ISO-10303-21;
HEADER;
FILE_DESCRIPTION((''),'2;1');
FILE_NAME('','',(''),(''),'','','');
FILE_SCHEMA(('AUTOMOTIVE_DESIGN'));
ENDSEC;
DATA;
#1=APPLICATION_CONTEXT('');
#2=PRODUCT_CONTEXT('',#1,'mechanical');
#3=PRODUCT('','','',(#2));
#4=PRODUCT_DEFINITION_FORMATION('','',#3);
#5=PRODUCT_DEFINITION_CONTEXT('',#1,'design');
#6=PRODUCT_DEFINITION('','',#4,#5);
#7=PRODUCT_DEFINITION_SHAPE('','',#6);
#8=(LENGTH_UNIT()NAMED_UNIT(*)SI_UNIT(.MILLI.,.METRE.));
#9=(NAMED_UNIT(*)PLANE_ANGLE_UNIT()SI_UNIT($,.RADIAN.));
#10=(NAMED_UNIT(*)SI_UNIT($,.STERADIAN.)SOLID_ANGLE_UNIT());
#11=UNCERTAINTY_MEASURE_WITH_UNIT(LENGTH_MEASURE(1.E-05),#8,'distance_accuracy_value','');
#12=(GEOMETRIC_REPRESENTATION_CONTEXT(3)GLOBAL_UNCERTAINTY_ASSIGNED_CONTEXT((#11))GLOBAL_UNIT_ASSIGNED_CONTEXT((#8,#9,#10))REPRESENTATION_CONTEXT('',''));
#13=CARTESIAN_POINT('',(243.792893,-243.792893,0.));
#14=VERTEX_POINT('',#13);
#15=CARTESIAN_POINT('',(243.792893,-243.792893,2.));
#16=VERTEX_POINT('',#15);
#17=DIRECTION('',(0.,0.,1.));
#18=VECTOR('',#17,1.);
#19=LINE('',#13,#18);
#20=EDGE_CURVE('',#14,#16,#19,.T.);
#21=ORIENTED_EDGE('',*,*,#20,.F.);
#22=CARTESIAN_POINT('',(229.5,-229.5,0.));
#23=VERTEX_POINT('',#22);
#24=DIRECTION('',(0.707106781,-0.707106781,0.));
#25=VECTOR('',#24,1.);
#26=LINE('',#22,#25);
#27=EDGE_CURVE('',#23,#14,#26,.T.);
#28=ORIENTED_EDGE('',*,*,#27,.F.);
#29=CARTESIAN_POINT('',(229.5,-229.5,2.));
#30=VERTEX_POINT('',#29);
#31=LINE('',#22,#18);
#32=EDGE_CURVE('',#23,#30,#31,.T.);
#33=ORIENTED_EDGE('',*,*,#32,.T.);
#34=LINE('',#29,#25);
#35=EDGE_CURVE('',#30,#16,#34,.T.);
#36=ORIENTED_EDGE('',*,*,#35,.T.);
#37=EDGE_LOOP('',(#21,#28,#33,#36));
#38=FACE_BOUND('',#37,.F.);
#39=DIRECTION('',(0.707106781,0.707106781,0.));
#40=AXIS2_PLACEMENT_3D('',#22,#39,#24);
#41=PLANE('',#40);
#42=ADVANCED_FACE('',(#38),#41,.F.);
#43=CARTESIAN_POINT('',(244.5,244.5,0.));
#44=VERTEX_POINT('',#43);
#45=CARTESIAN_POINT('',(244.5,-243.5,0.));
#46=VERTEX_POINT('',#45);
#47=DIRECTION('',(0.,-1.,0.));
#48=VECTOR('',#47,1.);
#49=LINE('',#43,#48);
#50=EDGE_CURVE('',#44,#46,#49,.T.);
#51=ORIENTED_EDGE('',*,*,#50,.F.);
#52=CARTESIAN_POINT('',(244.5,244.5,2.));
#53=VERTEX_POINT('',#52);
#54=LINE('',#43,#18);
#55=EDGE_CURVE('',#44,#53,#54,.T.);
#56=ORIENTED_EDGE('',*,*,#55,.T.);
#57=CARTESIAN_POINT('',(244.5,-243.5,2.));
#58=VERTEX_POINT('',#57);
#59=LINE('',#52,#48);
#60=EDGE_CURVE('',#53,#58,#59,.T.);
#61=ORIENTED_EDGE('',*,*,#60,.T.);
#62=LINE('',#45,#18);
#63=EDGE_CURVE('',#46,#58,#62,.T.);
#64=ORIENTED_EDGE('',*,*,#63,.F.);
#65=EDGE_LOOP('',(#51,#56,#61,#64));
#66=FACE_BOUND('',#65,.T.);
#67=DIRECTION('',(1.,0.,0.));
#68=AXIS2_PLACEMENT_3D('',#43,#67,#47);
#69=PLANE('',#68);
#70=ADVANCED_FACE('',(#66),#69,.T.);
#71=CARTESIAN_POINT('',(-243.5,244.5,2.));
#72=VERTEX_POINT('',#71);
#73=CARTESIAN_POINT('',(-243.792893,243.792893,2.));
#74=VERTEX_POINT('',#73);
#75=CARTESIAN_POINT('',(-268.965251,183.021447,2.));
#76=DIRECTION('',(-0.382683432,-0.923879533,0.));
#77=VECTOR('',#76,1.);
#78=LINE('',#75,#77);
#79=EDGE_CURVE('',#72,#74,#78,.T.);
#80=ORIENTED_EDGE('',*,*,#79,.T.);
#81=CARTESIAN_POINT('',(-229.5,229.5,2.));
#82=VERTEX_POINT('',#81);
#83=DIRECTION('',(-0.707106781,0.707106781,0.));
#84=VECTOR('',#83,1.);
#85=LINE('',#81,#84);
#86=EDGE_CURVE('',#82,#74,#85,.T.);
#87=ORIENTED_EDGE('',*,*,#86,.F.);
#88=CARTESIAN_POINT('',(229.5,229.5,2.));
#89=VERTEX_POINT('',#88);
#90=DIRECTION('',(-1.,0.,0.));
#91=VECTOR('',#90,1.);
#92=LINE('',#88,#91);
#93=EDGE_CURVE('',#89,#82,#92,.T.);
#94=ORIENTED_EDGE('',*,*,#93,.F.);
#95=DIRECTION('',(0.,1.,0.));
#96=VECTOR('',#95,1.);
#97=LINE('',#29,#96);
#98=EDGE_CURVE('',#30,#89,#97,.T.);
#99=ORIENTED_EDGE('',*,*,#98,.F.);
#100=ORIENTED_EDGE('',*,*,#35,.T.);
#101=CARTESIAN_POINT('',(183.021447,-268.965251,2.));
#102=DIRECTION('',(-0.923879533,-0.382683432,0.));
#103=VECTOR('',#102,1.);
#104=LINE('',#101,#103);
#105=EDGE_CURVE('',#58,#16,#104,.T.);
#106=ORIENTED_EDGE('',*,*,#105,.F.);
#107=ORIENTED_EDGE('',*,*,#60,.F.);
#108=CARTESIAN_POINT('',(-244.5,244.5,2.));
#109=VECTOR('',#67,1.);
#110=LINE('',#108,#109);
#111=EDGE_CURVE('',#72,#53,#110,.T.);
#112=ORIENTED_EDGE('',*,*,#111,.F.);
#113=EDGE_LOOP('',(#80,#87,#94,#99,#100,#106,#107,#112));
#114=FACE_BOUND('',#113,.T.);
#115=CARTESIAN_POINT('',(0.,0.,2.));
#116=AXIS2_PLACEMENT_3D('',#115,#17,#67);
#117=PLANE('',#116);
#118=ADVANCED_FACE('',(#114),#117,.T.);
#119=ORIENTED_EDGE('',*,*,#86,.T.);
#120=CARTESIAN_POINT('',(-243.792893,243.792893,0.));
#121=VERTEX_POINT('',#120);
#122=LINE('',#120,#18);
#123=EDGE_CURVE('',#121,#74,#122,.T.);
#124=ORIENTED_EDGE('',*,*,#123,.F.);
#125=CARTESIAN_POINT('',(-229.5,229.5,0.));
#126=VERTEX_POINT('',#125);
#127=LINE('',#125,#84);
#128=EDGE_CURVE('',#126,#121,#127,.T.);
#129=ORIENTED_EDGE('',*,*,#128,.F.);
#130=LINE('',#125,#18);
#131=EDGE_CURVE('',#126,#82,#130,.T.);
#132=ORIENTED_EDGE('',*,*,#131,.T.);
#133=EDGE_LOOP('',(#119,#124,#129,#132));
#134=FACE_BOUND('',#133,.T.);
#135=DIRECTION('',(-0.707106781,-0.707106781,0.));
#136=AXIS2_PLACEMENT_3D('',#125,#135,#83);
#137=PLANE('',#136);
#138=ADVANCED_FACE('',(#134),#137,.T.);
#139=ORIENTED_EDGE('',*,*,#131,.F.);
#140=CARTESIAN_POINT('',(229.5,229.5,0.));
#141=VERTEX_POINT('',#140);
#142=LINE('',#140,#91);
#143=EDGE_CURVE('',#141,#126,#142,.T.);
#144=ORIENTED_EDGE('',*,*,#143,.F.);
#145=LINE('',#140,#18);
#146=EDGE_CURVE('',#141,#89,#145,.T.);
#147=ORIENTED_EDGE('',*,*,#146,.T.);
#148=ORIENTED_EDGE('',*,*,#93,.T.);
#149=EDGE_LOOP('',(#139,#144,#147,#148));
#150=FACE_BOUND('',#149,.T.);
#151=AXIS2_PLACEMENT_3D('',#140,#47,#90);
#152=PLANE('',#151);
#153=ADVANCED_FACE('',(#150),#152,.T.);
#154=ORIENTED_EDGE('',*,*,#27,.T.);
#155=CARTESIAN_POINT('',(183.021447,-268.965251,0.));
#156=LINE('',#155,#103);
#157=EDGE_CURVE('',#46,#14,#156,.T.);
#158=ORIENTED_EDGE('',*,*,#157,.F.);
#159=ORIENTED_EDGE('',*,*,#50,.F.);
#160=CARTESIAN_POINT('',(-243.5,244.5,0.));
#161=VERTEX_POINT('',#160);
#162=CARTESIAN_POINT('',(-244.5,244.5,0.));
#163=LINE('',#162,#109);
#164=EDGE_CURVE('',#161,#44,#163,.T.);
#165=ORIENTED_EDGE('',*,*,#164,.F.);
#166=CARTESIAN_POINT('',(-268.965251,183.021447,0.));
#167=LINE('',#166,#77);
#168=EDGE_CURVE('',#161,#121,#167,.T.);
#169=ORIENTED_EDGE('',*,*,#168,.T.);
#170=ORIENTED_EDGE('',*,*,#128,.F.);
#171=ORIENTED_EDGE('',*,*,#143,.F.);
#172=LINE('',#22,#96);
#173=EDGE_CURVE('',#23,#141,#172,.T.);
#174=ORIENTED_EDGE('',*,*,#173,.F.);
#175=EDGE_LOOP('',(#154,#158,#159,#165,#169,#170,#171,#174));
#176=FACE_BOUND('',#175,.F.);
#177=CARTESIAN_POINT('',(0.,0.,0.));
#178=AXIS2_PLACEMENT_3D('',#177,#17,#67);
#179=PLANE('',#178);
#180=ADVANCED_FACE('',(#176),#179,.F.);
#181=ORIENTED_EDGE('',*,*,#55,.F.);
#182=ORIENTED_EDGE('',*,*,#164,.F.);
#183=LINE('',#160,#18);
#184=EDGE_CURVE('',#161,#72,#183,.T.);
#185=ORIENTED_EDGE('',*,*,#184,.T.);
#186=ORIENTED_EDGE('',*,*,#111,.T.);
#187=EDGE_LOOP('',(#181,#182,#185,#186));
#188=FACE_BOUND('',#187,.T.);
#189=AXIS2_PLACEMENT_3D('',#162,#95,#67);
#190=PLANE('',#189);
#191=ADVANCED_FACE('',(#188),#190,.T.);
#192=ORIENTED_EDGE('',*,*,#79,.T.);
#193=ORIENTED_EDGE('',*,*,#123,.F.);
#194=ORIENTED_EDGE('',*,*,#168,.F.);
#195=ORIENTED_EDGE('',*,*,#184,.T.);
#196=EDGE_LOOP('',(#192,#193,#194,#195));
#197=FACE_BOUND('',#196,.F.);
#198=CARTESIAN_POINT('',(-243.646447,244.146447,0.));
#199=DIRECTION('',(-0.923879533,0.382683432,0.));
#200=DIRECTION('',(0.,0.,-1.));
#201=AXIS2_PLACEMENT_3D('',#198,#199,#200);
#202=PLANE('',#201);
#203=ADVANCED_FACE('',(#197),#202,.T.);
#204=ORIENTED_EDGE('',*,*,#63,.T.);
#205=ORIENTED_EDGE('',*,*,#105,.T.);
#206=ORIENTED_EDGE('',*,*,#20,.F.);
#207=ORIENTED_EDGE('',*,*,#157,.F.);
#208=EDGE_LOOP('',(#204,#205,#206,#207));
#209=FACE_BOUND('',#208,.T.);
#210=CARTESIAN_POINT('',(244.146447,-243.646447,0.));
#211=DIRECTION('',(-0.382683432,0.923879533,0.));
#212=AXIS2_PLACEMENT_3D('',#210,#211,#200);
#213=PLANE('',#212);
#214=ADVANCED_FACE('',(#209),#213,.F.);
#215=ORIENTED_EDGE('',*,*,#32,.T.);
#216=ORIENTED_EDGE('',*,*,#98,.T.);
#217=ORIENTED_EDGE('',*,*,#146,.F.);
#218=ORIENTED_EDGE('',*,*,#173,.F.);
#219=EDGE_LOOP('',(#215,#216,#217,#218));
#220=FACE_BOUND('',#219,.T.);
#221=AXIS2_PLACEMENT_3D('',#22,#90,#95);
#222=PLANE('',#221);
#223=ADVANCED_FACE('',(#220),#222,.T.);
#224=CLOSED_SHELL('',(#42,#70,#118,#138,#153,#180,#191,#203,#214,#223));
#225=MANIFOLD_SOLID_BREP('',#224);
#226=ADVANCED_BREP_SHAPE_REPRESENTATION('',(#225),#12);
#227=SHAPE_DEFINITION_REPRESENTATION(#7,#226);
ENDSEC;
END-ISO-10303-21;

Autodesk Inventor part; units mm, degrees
ref_plane "YZ Plane" through (0, 0, 0) normal (1, 0, 0) x (0, 1, 0)
ref_plane "XZ Plane" through (0, 0, 0) normal (0, 1, 0) x (-1, 0, 0)
ref_plane "XY Plane" through (0, 0, 0) normal (0, 0, 1) x (1, 0, 0)
sketch "Sketch1" plane through (0, 0, 0) normal (0, 0, 1) x (1, 0, 0)
  line L0 (-244.5, 244.5) -> (244.5, 244.5)
  line L1 (244.5, 244.5) -> (244.5, -244.5)
  line L2 (244.5, -244.5) -> (-244.5, -244.5)
  line L3 (-244.5, -244.5) -> (-244.5, 244.5)
  line L4 (-244.5, 244.5) -> (244.5, -244.5) construction
  line L5 (244.5, 244.5) -> (-244.5, -244.5) construction
  line L6 (-229.5, -229.5) -> (229.5, -229.5)
  line L7 (229.5, -229.5) -> (229.5, 229.5)
  line L8 (229.5, 229.5) -> (-229.5, 229.5)
  line L9 (-229.5, 229.5) -> (-229.5, -229.5)
  line L10 (-229.5, -229.5) -> (229.5, 229.5) construction
  line L11 (229.5, -229.5) -> (-229.5, 229.5) construction
  line L12 (-229.5, 229.5) -> (-244.5, 244.5)
  line L13 (229.5, -229.5) -> (244.5, -244.5)
  point P0 (0, 0)
  dimension "d1" = 489
  dimension "d18" = 15
  dimension "d19" = 489
extrude "Plate1" add sketch "Sketch1" along normal blind 2 contours L0 L1 L13 L7 L8 L12
chamfer "Corner Chamfer1" distance 1 angle 45 2 edges at (-244.5, 244.5, 1) (244.5, -244.5, 1)
equation "\"d19\" = d1"
equation "\"d3\" = Thickness"
equation "\"BendRadius\" = Thickness"
equation "\"BendReliefWidth\" = Thickness"
equation "\"BendReliefDepth\" = 0.5 * Thickness"
equation "\"CornerReliefSize\" = 4 * Thickness"
equation "\"MinimumRemnant\" = 2 * Thickness"
equation "\"TransitionRadius\" = BendRadius"
equation "\"JacobiRadiusSize\" = BendRadius"
equation "\"GapSize\" = Thickness"
equation "\"Thickness\" = 2"
properties part number "PNS waste water bin 06"
